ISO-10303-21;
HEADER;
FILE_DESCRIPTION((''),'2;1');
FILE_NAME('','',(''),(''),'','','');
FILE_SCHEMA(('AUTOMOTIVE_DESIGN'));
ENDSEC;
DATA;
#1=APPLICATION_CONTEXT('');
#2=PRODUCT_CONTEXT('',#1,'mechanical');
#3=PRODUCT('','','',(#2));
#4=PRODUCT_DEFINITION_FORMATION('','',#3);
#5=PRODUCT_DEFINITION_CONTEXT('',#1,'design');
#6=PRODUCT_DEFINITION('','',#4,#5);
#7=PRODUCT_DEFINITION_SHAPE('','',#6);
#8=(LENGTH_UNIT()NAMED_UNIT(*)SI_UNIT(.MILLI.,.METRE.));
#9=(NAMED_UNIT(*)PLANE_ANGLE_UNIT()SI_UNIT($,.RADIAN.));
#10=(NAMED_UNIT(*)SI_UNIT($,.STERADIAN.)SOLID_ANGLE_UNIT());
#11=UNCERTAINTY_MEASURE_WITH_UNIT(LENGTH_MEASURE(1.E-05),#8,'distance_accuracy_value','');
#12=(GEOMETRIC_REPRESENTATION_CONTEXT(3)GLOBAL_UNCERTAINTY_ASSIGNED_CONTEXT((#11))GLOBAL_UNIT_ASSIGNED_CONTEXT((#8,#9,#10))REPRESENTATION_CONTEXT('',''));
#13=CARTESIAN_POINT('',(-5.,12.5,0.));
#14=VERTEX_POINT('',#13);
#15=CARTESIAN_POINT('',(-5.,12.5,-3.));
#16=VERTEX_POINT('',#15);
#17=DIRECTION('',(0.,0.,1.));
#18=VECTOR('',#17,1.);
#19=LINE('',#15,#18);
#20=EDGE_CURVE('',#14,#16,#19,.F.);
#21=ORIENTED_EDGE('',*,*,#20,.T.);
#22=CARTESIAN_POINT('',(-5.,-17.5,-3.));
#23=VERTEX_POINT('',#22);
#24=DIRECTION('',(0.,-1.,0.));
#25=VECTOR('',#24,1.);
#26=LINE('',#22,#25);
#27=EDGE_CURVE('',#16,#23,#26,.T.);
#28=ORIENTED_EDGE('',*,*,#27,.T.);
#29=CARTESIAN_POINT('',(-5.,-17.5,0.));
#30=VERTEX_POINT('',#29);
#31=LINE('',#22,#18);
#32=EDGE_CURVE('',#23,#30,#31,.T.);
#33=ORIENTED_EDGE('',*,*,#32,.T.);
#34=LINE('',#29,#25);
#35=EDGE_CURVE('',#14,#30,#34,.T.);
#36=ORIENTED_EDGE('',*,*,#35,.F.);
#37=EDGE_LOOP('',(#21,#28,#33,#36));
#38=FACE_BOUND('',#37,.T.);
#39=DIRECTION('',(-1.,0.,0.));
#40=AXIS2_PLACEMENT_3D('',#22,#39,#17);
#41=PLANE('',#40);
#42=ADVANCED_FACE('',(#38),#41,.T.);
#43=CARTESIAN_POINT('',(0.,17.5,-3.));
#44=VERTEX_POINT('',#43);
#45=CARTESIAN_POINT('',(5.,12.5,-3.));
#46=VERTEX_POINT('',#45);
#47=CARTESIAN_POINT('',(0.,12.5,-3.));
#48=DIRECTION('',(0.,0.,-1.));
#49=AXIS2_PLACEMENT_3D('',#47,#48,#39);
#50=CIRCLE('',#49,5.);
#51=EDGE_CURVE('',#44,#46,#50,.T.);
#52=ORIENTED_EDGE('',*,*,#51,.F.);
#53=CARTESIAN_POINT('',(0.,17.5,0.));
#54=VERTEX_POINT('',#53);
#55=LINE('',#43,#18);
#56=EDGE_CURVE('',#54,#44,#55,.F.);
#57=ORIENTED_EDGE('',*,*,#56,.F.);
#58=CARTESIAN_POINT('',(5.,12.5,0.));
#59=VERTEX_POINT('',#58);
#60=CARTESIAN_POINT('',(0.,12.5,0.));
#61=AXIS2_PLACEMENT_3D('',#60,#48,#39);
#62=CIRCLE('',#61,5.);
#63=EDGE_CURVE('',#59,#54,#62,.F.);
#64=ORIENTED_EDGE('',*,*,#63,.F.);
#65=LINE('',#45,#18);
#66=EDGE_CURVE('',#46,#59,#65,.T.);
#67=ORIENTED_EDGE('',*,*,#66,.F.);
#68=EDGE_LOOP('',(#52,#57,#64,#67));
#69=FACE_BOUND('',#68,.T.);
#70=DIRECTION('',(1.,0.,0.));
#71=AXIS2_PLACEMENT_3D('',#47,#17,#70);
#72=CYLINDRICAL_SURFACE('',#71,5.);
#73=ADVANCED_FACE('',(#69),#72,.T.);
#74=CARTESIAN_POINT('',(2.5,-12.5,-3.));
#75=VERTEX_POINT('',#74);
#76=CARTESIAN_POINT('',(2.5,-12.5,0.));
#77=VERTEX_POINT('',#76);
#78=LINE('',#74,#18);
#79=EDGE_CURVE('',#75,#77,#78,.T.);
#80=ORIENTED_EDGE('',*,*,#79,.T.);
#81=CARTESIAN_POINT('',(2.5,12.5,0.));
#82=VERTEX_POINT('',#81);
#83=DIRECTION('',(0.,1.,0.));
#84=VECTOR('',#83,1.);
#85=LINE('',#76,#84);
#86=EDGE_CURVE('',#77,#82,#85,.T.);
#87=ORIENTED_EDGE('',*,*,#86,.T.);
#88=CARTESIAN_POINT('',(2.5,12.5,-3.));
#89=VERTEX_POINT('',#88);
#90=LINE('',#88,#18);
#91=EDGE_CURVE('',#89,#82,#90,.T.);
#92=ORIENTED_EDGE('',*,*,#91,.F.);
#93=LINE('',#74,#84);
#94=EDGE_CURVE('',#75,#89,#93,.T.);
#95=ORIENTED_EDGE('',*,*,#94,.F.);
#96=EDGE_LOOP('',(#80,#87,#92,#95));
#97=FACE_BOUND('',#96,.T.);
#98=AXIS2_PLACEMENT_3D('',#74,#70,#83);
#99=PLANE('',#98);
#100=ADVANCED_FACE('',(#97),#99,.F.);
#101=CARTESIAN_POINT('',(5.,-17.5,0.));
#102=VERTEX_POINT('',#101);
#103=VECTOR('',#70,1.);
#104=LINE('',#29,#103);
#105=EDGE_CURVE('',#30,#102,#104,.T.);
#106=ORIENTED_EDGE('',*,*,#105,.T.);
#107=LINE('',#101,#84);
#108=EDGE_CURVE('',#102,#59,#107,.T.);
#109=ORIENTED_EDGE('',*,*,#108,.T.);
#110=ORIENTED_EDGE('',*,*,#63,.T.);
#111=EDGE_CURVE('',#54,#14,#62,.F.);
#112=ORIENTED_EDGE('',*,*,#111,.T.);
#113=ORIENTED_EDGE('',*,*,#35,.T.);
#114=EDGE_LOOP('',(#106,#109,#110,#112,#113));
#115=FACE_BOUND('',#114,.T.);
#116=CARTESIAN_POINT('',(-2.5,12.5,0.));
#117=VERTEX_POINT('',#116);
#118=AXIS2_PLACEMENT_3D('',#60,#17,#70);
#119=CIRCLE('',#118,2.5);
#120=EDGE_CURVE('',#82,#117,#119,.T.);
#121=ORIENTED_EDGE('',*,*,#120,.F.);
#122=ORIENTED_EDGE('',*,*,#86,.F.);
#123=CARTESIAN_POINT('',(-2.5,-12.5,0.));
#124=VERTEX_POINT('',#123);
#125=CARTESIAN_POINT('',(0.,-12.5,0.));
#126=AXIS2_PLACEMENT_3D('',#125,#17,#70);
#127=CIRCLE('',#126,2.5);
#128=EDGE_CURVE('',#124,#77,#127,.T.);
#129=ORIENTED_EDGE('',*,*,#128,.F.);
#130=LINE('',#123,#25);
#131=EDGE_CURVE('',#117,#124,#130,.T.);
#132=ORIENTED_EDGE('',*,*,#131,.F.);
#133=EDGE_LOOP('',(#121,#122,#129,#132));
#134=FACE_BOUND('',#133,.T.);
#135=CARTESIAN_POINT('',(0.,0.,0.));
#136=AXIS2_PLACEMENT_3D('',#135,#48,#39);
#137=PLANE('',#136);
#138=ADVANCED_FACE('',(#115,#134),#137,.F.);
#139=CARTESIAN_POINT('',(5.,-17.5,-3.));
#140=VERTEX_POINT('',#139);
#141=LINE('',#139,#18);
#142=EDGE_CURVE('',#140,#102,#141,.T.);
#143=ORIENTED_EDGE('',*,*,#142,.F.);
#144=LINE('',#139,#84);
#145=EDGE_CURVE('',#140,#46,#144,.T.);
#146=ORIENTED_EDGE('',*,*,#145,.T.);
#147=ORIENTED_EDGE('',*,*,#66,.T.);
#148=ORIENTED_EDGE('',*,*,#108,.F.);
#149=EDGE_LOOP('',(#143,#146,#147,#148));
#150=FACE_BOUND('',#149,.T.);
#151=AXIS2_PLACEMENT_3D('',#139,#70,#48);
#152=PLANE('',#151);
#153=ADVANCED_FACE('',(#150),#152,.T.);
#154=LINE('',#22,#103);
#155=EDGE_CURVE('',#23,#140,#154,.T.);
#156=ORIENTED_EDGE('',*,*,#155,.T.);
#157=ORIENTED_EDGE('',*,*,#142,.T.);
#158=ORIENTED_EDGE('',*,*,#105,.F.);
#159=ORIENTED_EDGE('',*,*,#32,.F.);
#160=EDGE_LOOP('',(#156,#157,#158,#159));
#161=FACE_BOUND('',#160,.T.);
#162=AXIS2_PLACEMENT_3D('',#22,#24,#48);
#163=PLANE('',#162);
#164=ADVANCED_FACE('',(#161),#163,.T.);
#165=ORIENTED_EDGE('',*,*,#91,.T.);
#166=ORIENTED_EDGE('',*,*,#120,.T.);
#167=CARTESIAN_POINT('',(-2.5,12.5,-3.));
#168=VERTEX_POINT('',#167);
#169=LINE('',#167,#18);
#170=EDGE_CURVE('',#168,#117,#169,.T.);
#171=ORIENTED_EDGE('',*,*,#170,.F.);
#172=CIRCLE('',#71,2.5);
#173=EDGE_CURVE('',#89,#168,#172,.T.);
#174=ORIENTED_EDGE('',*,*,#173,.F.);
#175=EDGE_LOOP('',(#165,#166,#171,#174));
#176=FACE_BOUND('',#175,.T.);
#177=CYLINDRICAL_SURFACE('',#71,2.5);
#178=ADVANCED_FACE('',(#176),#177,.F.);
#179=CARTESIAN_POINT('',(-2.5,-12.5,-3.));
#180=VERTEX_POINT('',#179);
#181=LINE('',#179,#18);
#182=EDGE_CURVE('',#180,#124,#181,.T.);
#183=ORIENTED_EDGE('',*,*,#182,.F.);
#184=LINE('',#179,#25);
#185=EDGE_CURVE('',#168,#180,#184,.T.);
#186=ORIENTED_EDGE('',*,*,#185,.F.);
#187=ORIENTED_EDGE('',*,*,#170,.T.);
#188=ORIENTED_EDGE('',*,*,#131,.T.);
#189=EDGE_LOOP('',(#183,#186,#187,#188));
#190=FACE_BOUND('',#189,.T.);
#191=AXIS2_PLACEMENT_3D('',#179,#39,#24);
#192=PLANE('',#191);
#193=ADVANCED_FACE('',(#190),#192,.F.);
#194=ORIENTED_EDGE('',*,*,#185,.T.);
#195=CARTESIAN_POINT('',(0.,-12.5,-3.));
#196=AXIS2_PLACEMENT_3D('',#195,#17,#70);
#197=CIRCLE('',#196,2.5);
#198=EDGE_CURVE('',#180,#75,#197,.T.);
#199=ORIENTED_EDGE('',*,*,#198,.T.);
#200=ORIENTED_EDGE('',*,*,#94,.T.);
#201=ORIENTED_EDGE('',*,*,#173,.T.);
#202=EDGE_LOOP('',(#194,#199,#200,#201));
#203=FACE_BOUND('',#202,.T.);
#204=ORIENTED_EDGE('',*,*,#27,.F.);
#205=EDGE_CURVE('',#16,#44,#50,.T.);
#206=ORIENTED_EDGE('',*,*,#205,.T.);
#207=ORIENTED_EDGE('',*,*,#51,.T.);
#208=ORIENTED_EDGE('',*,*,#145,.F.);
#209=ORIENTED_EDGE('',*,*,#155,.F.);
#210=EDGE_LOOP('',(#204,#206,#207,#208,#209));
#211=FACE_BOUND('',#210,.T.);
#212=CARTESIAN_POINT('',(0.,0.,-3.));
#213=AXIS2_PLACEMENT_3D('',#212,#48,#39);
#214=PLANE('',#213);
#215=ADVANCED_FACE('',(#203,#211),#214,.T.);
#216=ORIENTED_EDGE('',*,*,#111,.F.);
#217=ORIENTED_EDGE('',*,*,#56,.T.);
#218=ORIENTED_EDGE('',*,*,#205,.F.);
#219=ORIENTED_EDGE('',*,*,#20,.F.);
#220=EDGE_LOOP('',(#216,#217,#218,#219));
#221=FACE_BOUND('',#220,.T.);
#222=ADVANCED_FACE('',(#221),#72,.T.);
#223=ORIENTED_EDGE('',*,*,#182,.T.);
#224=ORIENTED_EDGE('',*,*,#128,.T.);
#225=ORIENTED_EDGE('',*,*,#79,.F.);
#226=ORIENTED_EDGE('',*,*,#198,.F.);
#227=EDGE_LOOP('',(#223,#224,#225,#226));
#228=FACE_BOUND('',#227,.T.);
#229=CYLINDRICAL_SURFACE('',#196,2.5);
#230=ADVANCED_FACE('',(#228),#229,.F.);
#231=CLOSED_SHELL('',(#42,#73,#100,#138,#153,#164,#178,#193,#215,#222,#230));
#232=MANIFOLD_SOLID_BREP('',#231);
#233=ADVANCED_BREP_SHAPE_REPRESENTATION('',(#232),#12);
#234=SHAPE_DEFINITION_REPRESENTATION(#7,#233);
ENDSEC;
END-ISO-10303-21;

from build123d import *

# Parameters (mm, degrees)
SKETCH1_W          = 10
SKETCH1_H          = 35
BASE_FLANGE1_DEPTH = 3
FILLET1_R          = 5


# Sheet-metal steps are written as plain solids
with BuildPart() as part:
    # Sketch1 → Base-Flange1 (new body)
    with BuildSketch(Plane.XY):
        Rectangle(SKETCH1_W, SKETCH1_H)
        with BuildLine():
            Line((-2.5, -12.5), (-2.5, 12.5))
            ThreePointArc((-2.5, 12.5), (0, 15), (2.5, 12.5))
            Line((2.5, 12.5), (2.5, -12.5))
            ThreePointArc((2.5, -12.5), (0, -15), (-2.5, -12.5))
        make_face(mode=Mode.SUBTRACT)
    extrude(amount=-BASE_FLANGE1_DEPTH)

    # Fillet1
    fillet1_edges = [part.edges().sort_by_distance(p)[0] for p in [
        (-5, 17.5, -1.5),
        (5, 17.5, -1.5),
    ]]
    fillet(fillet1_edges, radius=FILLET1_R - 0.0001)  # a hair under: the kernel refuses the full size


solid = part.part
